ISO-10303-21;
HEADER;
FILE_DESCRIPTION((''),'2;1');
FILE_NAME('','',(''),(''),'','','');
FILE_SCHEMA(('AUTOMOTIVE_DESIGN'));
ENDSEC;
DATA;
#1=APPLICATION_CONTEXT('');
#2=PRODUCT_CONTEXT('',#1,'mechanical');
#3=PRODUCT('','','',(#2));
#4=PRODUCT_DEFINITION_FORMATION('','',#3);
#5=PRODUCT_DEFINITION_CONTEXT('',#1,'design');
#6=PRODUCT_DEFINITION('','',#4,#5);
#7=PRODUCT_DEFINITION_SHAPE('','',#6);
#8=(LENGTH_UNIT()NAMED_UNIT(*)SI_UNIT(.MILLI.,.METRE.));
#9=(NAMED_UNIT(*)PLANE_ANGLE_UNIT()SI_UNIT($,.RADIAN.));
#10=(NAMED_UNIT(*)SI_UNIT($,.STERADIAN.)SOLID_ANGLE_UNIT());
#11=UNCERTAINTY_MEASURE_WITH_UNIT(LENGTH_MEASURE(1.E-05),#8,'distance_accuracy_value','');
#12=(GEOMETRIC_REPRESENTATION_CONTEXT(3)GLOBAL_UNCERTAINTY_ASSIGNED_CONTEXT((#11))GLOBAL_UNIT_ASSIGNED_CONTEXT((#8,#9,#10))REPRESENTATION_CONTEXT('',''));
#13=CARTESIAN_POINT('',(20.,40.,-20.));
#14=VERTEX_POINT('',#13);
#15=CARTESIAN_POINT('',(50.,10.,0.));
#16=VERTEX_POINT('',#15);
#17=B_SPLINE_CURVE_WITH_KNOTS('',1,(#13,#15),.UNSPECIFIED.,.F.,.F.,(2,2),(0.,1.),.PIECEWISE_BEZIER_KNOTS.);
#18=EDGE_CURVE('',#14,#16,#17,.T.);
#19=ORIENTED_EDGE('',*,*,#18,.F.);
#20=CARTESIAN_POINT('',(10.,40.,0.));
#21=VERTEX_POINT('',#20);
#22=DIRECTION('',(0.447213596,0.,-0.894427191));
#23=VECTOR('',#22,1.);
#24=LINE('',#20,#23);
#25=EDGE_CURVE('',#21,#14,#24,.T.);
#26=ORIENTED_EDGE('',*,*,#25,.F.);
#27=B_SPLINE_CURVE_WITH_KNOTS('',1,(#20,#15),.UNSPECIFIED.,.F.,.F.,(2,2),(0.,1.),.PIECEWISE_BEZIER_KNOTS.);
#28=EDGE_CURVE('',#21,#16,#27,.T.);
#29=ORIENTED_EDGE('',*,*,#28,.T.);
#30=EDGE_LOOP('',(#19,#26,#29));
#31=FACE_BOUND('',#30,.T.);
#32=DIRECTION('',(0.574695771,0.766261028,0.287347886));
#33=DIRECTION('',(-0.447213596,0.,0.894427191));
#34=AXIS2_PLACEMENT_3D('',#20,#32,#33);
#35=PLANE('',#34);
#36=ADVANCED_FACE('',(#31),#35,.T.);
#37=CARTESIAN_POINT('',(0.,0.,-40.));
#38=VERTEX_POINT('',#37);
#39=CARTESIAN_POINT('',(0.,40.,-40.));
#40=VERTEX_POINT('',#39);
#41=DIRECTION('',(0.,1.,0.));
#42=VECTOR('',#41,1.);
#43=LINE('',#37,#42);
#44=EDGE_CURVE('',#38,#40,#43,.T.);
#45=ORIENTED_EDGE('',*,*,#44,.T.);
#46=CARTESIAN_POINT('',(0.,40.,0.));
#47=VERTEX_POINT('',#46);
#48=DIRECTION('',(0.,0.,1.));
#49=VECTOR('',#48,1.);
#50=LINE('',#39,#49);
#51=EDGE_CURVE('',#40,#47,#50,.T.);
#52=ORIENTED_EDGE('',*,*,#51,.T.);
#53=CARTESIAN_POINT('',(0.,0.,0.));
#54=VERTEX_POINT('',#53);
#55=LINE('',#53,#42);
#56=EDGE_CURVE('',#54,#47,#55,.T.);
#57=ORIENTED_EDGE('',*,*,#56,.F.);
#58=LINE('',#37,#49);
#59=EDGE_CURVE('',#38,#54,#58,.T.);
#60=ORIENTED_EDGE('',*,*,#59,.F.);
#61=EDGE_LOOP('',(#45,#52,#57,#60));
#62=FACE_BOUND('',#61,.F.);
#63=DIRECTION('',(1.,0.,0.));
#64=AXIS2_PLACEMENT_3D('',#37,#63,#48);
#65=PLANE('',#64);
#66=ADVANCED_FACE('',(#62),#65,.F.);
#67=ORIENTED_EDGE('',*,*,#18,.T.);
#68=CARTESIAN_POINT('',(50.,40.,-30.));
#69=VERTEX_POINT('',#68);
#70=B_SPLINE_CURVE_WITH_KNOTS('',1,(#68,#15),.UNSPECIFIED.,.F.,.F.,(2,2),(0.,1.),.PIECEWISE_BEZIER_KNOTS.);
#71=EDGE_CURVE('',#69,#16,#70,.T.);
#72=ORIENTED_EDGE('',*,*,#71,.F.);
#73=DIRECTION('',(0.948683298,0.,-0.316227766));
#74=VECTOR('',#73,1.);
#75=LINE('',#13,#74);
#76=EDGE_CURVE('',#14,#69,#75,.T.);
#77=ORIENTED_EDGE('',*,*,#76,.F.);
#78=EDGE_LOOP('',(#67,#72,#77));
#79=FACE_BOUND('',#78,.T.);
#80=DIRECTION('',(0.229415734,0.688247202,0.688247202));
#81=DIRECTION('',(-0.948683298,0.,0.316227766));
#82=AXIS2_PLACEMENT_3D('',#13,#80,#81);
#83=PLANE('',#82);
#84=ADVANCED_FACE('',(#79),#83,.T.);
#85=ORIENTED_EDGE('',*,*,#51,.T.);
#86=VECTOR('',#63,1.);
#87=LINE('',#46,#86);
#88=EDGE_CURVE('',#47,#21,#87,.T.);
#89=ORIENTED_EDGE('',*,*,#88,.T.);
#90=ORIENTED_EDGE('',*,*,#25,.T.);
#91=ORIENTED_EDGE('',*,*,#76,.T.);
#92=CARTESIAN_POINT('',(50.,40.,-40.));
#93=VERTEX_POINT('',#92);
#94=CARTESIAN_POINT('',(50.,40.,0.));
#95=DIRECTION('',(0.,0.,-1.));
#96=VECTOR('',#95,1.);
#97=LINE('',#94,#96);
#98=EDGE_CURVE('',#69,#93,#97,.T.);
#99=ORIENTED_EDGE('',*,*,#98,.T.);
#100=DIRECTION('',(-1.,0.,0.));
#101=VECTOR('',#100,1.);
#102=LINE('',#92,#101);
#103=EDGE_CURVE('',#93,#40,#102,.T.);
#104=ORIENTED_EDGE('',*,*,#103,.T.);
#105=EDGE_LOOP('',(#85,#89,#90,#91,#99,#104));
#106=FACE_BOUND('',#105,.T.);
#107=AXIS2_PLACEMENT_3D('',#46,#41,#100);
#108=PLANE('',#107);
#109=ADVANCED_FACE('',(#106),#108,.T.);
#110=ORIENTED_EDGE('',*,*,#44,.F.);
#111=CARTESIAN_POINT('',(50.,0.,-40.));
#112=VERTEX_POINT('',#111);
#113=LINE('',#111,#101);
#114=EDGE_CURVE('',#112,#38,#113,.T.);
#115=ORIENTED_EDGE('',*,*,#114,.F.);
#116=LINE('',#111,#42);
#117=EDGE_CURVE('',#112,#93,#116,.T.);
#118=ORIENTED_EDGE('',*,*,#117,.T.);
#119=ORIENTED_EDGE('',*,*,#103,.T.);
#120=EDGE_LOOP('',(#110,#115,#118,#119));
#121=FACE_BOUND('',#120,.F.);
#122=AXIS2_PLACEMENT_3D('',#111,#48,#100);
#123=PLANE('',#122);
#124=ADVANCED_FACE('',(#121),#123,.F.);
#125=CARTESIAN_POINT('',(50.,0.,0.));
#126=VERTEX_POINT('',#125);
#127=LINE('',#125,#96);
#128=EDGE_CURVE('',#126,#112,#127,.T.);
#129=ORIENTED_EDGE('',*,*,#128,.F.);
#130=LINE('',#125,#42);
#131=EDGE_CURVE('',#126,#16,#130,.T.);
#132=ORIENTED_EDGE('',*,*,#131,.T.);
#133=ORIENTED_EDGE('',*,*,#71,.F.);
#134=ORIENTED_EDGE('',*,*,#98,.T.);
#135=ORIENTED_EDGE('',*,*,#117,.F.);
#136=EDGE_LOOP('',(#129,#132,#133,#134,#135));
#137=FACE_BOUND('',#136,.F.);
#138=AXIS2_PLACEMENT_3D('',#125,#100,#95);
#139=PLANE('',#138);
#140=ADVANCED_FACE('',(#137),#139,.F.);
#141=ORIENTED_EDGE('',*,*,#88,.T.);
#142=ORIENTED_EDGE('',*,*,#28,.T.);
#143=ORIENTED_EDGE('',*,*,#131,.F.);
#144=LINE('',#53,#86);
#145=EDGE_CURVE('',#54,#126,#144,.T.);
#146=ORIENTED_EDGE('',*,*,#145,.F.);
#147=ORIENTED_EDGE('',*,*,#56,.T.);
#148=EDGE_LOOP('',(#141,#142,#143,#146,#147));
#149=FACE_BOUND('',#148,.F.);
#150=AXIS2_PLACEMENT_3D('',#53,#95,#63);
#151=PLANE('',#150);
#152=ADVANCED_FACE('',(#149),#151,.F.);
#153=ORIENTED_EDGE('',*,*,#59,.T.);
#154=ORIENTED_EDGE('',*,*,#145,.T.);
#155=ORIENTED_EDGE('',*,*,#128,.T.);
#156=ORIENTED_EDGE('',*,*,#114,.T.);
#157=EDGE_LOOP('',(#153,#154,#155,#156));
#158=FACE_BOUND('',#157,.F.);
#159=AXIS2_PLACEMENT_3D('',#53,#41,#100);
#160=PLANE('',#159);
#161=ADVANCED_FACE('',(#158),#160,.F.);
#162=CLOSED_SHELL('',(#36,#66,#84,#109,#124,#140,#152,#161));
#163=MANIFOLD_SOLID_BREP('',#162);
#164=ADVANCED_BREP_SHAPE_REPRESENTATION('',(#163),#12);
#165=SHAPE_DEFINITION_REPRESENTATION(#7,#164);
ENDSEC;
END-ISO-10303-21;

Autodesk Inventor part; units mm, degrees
ref_plane "YZ Plane" through (0, 0, 0) normal (1, 0, 0) x (0, 1, 0)
ref_plane "XZ Plane" through (0, 0, 0) normal (0, 1, 0) x (-1, 0, 0)
sketch "草圖1" plane through (0, 0, 0) normal (0, 1, 0) x (-1, 0, 0)
  line L0 (0, 0) -> (-50, 0)
  line L1 (-50, 0) -> (-50, -40)
  line L2 (-50, -40) -> (0, -40)
  line L3 (0, -40) -> (0, 0)
  dimension "d0" = 50
  dimension "d1" = 40
extrude "擠出1" add sketch "草圖1" along normal blind 40
sketch "草圖2" plane through (0, 40, 0) normal (0, 1, 0) x (1, 0, 0)
  line L0 (0, 0) -> (0, 40) construction
  line L1 (0, 40) -> (50, 40) construction
  line L2 (50, 40) -> (50, 0) construction
  line L3 (50, 0) -> (0, 0) construction
  line L4 (0, 0) -> (50, 0) construction
  line L5 (10, 0) -> (20, 20)
  line L6 (20, 20) -> (50, 0)
  line L7 (10, 0) -> (50, 0)
  dimension "d4" = 20
  dimension "d5" = 40
  dimension "d6" = 10
ref_plane "工作平面1" through (0, 10, 0) normal (0, -1, 0) x (1, 0, 0)
sketch "草圖3" plane through (0, 10, 0) normal (0, -1, 0) x (1, 0, 0)
  line L0 (0, -40) -> (0, 0) construction
  line L1 (0, 0) -> (50, 0) construction
  line L2 (50, 0) -> (50, -40) construction
  line L3 (50, -40) -> (0, -40) construction
  line L4 (0, 0) -> (50, 0) projected
loft "斷面混成1" cut profiles "草圖2" section 2 point at (50, 10, 0)
sketch "草圖4" plane through (0, 40, 0) normal (0, 1, 0) x (1, 0, 0)
  line L0 (50, 0) -> (20, 20) construction
  line L1 (20, 20) -> (10, 0) construction
  line L2 (10, 0) -> (0, 0) construction
  line L3 (0, 0) -> (0, 40) construction
  line L4 (0, 40) -> (50, 40) construction
  line L5 (50, 40) -> (50, 0) construction
  line L6 (20, 20) -> (50, 0) projected
  line L7 (20, 20) -> (50, 30)
  line L8 (50, 0) -> (50, 40) construction
  line L9 (50, 30) -> (50, 0)
  line L10 (10, 0) -> (20, 20) construction
  line L11 (50, 0) -> (20, 20)
  dimension "d12" = 10
sketch "草圖5" plane through (0, 10, 0) normal (0, -1, 0) x (1, 0, 0)
  line L0 (50, 0) -> (50, -40) construction
  point P0 (0, 0)
loft "斷面混成2" cut profiles "草圖4" section 2 point at (50, 10, 0)
properties part number "24" material "鋼、碳鋼"
